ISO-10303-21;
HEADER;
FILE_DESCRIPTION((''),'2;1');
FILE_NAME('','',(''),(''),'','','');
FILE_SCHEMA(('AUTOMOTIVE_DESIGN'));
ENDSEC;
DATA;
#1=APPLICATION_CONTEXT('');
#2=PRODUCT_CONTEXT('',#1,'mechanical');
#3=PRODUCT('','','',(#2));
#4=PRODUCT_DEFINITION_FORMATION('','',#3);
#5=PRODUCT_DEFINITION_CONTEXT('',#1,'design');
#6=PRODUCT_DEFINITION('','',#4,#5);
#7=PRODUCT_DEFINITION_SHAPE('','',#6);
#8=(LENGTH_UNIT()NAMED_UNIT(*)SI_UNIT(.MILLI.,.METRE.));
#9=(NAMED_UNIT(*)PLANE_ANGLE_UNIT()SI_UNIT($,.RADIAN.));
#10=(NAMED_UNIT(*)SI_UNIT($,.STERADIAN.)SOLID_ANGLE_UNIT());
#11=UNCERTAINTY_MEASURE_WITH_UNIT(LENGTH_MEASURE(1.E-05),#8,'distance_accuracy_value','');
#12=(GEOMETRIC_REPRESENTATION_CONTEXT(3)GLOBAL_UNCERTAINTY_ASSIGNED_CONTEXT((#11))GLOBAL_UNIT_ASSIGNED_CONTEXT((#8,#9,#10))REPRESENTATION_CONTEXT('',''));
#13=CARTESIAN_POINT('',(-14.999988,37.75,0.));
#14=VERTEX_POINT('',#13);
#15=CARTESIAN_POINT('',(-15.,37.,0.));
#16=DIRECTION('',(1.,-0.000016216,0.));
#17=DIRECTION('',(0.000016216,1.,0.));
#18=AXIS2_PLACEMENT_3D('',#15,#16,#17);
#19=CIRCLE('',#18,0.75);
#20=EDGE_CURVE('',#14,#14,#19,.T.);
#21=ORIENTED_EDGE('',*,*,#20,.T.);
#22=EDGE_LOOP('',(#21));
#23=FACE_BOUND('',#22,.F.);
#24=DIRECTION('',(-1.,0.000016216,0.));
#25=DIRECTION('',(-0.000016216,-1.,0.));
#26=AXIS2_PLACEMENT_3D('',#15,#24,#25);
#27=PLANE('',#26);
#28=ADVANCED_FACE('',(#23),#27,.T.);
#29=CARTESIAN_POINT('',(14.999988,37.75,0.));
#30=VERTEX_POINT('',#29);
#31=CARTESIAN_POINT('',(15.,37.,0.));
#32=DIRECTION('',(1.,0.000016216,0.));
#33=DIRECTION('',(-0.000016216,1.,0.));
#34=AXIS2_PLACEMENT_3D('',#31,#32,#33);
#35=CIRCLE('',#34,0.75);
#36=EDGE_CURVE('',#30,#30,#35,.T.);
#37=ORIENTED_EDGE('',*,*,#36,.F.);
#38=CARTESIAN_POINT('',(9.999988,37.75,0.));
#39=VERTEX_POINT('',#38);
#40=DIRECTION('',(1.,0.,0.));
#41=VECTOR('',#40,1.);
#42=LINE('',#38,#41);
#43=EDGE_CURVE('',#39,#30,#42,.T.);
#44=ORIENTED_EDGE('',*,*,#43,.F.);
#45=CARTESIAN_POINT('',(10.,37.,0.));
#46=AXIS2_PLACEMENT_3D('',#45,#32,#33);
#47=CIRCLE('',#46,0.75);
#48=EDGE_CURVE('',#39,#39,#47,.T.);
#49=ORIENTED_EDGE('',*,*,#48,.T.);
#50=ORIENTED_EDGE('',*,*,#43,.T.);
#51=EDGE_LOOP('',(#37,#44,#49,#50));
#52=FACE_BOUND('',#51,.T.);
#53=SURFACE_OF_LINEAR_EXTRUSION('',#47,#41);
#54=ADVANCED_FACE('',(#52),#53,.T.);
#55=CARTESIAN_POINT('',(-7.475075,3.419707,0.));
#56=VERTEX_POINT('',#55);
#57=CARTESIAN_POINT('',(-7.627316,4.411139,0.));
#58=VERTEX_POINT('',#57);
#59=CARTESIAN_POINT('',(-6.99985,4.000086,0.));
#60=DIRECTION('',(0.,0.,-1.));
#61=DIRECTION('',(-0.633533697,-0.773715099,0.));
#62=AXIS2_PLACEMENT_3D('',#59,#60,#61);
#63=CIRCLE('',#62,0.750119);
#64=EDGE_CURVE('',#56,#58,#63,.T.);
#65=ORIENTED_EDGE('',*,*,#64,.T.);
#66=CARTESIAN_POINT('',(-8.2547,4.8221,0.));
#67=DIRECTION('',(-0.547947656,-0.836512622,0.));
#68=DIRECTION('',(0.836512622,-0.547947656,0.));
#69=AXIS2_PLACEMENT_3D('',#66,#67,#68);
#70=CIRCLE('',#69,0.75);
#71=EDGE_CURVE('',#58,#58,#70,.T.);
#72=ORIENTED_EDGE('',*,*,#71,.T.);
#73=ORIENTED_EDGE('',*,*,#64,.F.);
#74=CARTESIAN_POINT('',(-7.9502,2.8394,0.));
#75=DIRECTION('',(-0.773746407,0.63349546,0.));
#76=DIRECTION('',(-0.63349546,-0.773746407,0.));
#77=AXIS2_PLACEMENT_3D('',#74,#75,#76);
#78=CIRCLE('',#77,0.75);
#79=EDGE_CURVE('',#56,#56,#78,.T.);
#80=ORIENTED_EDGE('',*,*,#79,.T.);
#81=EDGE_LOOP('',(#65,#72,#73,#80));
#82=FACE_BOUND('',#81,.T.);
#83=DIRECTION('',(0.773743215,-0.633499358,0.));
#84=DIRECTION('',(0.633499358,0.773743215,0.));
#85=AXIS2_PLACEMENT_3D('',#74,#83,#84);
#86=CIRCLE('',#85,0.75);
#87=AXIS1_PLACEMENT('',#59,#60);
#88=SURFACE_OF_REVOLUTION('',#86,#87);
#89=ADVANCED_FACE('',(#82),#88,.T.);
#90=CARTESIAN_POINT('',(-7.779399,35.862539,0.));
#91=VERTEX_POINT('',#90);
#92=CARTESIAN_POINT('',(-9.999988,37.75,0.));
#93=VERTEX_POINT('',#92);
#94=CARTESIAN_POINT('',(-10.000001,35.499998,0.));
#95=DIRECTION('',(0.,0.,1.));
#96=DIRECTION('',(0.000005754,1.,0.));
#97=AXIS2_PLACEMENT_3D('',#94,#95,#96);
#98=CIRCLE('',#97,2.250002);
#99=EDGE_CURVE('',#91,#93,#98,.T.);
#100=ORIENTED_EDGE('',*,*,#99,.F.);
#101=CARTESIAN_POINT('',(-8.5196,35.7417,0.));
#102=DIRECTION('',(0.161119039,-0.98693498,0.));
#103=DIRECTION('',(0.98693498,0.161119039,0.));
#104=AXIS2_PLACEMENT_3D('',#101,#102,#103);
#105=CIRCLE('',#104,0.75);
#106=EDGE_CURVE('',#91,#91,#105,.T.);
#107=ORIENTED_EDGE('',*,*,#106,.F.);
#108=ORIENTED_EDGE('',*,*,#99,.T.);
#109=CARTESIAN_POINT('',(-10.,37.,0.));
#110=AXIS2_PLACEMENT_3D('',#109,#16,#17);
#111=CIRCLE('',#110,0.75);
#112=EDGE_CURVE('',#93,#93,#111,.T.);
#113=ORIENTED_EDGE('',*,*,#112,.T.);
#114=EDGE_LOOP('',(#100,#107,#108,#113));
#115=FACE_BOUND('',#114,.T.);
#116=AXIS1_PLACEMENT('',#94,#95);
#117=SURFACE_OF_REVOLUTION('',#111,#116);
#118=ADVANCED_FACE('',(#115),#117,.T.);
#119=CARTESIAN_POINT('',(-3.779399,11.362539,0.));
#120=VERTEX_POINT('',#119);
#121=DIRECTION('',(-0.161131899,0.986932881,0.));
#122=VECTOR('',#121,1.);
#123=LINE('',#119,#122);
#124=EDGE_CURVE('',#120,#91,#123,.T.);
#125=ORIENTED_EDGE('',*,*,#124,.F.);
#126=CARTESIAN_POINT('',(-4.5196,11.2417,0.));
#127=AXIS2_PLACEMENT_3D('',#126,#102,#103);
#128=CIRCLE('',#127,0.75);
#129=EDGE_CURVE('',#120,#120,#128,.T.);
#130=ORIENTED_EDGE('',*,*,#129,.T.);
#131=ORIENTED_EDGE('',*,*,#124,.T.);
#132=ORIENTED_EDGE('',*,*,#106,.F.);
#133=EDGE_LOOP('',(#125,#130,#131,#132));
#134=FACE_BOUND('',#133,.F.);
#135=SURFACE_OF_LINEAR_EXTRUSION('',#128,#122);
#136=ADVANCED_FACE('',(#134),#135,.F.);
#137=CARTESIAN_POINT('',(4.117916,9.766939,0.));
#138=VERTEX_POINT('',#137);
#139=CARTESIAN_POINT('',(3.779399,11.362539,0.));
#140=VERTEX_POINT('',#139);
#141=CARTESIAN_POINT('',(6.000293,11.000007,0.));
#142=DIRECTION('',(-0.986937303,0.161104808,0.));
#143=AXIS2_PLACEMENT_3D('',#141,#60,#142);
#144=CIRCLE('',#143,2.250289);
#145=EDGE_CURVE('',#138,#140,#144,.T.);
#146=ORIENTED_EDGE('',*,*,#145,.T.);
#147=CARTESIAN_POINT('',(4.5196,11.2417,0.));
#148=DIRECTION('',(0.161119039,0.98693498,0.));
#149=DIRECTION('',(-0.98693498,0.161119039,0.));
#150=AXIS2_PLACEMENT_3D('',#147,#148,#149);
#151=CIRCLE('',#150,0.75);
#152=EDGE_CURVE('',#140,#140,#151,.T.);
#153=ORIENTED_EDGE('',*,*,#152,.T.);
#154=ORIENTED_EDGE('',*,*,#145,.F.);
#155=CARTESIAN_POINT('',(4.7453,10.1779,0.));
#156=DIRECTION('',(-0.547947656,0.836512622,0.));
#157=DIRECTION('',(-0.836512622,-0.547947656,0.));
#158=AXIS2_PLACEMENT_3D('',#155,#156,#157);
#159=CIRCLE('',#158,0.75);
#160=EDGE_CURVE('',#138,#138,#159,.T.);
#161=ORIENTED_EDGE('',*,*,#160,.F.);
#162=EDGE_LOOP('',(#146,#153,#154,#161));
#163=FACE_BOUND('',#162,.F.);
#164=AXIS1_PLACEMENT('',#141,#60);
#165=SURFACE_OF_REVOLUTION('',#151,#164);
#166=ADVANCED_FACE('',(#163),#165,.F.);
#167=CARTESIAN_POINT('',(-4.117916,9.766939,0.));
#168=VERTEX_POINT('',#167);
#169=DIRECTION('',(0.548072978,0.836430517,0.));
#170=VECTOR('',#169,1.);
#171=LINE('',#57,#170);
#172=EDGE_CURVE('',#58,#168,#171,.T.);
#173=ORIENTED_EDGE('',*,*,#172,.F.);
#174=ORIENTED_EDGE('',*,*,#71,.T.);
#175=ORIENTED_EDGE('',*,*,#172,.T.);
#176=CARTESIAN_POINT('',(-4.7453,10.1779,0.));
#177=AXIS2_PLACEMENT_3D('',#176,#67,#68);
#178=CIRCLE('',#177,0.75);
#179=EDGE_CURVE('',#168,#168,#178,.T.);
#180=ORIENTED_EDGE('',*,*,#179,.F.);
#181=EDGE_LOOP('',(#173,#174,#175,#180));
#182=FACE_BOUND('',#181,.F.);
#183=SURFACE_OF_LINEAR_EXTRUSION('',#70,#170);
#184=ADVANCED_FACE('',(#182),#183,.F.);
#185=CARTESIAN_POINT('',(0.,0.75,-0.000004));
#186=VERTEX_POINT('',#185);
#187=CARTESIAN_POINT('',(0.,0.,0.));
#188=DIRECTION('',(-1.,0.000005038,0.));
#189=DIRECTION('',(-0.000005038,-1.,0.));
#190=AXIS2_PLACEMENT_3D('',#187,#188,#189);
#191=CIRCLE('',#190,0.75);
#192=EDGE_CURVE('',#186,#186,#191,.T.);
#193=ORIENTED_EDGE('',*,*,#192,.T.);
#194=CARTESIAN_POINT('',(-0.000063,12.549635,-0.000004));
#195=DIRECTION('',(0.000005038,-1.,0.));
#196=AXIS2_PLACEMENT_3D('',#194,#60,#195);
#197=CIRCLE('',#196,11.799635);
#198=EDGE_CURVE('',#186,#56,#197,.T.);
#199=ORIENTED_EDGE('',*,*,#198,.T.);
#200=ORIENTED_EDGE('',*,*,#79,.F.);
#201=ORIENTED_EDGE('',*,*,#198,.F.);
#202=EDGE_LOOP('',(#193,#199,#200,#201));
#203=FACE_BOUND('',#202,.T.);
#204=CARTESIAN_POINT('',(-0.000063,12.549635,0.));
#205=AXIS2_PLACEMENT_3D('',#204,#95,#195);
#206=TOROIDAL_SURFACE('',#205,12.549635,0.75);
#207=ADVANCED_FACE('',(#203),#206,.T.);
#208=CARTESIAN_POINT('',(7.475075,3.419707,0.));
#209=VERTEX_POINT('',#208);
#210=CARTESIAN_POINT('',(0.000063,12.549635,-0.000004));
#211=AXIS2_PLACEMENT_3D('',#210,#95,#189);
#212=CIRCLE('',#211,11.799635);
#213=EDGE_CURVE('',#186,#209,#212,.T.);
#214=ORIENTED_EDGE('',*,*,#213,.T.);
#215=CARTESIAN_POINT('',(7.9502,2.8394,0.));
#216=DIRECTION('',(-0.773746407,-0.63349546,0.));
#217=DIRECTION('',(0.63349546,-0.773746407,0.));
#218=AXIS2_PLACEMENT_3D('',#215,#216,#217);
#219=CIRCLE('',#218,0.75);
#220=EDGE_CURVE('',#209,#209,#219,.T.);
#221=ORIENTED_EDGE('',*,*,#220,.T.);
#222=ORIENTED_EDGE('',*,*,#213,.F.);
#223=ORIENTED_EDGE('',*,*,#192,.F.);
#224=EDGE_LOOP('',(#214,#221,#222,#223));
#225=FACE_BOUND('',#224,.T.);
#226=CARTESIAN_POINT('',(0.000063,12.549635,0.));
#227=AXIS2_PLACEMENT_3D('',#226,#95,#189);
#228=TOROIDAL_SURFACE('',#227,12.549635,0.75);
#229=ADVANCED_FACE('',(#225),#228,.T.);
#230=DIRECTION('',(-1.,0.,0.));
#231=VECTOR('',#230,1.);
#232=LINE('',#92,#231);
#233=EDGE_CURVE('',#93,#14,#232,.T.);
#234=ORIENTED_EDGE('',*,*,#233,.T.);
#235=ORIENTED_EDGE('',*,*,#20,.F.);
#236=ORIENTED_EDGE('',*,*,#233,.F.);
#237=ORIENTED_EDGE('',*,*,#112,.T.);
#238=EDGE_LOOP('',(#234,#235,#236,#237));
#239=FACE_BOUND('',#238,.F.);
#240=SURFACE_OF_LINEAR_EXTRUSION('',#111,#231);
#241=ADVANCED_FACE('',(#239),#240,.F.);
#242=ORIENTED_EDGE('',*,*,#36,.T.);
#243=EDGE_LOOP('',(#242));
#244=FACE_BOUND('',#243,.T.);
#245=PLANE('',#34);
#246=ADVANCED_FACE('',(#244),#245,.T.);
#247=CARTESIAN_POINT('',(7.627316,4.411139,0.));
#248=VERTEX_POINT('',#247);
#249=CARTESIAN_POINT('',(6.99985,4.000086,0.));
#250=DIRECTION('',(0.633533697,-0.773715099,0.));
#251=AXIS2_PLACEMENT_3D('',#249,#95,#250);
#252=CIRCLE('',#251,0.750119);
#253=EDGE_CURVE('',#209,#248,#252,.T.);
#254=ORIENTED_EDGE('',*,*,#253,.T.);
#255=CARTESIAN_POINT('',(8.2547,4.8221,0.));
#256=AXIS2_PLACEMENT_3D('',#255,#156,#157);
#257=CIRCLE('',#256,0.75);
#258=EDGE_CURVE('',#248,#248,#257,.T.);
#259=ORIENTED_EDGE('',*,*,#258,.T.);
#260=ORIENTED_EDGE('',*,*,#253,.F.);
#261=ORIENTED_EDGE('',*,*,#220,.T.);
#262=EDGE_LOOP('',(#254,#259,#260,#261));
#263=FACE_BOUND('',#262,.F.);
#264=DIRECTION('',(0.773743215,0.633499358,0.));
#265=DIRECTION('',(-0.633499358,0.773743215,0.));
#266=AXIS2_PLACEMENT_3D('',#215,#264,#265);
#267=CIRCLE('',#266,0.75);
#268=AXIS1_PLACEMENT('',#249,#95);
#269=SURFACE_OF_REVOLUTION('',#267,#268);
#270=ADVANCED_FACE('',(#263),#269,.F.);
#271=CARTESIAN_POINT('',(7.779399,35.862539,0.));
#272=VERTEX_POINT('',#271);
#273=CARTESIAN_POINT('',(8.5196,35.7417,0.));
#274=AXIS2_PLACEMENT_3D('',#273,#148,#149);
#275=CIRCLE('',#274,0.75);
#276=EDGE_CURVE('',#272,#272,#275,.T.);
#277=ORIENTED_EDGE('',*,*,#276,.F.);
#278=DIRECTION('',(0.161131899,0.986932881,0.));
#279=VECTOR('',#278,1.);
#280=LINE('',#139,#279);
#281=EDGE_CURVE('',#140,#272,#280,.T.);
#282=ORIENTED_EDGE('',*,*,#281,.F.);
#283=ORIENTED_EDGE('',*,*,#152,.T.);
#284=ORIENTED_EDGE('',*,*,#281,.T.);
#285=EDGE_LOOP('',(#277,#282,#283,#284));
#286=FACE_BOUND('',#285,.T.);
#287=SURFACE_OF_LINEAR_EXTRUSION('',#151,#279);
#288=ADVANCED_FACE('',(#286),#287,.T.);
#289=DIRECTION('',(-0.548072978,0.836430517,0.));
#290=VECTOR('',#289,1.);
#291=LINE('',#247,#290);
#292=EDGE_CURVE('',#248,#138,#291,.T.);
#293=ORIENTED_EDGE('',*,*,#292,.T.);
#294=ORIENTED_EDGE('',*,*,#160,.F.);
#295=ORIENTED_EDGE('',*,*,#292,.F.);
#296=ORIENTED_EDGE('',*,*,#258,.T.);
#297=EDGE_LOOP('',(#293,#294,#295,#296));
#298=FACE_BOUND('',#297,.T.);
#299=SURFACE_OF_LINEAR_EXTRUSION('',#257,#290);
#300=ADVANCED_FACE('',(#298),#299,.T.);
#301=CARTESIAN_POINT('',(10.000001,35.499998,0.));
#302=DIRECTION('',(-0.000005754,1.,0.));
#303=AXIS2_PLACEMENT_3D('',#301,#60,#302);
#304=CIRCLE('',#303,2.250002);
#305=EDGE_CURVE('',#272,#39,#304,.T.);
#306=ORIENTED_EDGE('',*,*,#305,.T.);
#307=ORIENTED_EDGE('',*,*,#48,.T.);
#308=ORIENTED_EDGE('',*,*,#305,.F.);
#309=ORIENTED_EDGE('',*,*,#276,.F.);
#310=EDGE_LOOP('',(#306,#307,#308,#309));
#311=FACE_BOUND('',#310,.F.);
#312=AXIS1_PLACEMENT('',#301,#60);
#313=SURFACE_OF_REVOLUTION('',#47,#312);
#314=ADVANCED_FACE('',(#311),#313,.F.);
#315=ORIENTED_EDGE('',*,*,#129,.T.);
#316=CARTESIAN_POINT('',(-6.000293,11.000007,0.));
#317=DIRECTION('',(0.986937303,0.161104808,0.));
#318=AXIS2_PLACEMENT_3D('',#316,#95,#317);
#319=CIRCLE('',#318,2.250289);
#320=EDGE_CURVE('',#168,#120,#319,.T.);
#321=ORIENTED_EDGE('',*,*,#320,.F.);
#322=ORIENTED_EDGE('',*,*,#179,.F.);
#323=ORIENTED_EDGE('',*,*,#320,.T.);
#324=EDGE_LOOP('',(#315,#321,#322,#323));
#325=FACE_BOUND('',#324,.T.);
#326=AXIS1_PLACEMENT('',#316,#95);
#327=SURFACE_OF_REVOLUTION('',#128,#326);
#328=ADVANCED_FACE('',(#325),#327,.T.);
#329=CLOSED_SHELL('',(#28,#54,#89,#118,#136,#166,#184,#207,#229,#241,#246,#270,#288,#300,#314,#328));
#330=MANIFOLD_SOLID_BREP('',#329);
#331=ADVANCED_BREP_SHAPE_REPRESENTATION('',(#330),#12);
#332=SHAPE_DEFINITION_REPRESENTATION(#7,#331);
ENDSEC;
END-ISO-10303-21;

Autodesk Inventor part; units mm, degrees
ref_plane "YZ Plane" through (0, 0, 0) normal (1, 0, 0) x (0, 1, 0)
ref_plane "XZ Plane" through (0, 0, 0) normal (0, 1, 0) x (-1, 0, 0)
ref_plane "XY Plane" through (0, 0, 0) normal (0, 0, 1) x (1, 0, 0)
sketch "Sketch1" plane through (0, 0, 0) normal (0, 0, 1) x (1, 0, 0)
  line L0 (0, 0) -> (-17.2455, 0) construction
  arc A0 (0, 0) -> (7.9502, 2.8394) centre (0, 12.55) ccw
  arc A1 (7.9502, 2.8394) -> (8.2547, 4.8221) centre (7, 4) ccw
  line L1 (8.2547, 4.8221) -> (4.7453, 10.1779)
  arc A2 (4.5196, 11.2417) -> (4.7453, 10.1779) centre (6, 11) ccw
  line L2 (4.5196, 11.2417) -> (8.5196, 35.7417)
  arc A3 (10, 37) -> (8.5196, 35.7417) centre (10, 35.5) ccw
  line L3 (10, 37) -> (15, 37)
  dimension "d0" = 7
  dimension "d1" = 6
  dimension "d2" = 10
  dimension "d3" = 1.5
  dimension "d4" = 37
  dimension "d5" = 11
  dimension "d6" = 4
  dimension "d10" = 5
sketch "Sketch2" plane through (0, 0, 0) normal (1, 0, 0) x (0, 1, 0)
  circle A0 centre (0, 0) radius 0.75
  dimension "d7" = 1.5
sweep "Sweep1" add profiles "Sketch2" path "Sketch1"
mirror "Mirror1" about plane through (0, 0, 0) normal (-1, 0, 0) of "Sweep1"
properties part number "BINDER CLIP ARM"
